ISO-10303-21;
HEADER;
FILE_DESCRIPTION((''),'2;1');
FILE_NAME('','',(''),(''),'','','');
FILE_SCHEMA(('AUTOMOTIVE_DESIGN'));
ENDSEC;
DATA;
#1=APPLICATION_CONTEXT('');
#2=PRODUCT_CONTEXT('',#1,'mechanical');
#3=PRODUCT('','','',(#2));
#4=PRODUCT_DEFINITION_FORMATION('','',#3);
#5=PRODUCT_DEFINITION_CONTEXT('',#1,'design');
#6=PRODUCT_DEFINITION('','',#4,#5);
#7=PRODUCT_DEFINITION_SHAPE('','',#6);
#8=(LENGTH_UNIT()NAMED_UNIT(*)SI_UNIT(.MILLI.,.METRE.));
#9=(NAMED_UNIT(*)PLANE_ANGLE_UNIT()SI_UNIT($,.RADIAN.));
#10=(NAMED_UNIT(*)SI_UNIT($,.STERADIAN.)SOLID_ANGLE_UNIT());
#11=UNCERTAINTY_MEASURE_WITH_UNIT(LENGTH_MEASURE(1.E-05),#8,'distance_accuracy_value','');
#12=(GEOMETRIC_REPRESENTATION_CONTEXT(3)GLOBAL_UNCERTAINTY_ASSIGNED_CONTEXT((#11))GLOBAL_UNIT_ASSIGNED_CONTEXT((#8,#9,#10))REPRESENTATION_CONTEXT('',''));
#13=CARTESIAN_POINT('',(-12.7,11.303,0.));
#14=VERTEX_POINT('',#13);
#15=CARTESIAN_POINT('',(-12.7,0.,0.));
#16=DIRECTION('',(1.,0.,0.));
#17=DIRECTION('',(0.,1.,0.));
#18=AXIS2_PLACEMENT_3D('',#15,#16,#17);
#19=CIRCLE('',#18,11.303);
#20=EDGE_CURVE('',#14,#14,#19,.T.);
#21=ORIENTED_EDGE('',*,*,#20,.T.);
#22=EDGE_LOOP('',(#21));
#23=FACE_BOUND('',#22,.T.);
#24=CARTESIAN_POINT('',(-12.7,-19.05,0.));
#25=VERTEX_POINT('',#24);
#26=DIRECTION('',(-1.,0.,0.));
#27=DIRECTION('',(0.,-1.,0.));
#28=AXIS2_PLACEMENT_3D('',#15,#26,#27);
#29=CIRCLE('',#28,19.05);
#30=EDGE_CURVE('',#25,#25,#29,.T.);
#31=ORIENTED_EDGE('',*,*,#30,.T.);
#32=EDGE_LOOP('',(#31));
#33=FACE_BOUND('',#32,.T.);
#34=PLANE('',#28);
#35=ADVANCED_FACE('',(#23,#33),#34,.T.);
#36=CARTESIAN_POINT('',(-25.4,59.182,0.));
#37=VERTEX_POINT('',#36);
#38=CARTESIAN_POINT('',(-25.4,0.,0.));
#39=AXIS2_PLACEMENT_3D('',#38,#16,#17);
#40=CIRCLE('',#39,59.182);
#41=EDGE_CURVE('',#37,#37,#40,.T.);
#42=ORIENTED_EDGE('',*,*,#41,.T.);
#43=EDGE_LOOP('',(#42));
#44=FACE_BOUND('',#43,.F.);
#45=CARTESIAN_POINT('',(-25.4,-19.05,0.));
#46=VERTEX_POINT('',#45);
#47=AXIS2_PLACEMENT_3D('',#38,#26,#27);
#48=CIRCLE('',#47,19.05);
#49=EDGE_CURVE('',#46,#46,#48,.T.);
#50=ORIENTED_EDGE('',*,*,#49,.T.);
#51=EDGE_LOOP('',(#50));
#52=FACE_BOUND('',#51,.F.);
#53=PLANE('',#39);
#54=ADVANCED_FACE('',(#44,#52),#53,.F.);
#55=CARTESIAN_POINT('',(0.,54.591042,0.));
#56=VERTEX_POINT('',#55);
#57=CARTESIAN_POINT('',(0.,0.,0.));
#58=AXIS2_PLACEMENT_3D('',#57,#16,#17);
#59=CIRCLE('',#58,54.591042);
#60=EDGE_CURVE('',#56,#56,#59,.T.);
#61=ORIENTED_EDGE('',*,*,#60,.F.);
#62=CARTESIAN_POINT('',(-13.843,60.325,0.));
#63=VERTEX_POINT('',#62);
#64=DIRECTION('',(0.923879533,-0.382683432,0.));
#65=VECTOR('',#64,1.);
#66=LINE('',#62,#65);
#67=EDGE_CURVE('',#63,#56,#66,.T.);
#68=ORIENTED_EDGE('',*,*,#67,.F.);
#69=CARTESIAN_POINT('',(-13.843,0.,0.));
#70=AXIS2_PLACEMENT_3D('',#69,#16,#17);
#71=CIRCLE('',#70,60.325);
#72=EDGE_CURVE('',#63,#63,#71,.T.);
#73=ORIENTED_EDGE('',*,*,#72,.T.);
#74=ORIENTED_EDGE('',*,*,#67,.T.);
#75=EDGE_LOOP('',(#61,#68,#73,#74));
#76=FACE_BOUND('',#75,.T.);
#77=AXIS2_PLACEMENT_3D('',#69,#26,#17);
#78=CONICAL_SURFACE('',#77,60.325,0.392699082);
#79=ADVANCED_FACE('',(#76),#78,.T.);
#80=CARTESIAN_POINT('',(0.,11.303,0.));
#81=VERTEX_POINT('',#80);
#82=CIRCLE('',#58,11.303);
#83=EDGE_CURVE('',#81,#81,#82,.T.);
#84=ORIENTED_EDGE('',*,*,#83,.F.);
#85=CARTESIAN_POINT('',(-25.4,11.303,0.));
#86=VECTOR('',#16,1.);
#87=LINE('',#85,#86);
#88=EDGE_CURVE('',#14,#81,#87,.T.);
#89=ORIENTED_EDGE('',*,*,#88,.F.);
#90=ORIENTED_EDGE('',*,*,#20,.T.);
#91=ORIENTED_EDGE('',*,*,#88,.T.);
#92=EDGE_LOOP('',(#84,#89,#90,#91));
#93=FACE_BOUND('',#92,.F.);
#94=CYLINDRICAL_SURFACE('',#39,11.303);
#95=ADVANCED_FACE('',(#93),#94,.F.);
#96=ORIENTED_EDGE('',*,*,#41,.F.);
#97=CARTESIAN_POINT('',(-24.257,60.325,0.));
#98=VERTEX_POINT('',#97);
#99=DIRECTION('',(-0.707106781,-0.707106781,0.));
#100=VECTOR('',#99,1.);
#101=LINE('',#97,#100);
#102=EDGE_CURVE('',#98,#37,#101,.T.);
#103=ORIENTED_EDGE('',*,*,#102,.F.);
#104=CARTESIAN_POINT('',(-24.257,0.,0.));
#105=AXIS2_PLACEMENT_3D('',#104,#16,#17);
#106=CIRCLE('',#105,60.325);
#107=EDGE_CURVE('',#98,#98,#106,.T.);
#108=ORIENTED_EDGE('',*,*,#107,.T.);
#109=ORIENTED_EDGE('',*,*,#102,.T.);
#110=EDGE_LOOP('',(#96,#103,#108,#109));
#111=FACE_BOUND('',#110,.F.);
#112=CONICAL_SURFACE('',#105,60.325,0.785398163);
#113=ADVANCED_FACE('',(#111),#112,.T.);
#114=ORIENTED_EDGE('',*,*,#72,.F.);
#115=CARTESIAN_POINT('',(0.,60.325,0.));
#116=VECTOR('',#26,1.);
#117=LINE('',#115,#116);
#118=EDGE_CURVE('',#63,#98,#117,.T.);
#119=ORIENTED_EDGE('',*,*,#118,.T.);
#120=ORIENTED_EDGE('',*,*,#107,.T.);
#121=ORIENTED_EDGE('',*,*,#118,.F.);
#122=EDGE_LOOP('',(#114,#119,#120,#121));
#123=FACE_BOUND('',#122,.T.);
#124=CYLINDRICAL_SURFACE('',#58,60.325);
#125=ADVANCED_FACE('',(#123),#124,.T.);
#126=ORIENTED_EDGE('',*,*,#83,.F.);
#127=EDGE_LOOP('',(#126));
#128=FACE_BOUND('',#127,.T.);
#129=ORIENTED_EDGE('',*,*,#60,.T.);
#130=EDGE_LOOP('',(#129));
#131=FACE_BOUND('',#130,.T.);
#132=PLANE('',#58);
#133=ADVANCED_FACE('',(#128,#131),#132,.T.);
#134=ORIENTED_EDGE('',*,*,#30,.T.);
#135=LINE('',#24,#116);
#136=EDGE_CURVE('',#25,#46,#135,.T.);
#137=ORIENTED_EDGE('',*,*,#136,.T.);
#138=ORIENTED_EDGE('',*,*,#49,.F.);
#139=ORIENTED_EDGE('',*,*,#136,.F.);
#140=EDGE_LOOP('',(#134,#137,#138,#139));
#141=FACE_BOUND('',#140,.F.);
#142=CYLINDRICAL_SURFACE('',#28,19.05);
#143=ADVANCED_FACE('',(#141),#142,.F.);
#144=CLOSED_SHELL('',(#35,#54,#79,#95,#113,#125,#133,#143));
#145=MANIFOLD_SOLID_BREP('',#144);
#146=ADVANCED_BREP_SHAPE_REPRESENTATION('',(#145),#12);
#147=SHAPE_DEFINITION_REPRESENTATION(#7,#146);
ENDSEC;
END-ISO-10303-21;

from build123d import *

# Parameters (mm, degrees)
F0_R           = 60.325
F1_DEPTH       = 25.4
F2_SIZE        = 1.143
F4_D           = 22.606
F4_CBORE_D     = 38.1
F4_CBORE_DEPTH = 12.7


# Not quite as in the source:
# - a fillet or chamfer that OpenCascade refuses, or shapes differently, is made with other operations: its cross-section is extruded or revolved along the edge and cut away or added


with BuildPart() as f1:
    # F0 (on Right) → F1 (new body)
    with BuildSketch(Plane.YZ):
        Circle(F0_R)
    extrude(amount=-F1_DEPTH)

    # F2
    f2_edges = [f1.edges().sort_by_distance(p)[0] for p in [
        (-25.4, -60.325, 0),
        (-12.7, 60.325, 0),
        (0, -60.325, 0),
    ]]
    chamfer(f2_edges, length=F2_SIZE)

    # F4 (through all)
    with Locations(Plane(origin=(-25.4, 0, 0), x_dir=(0, -1, 0), z_dir=(-1, 0, 0))):
        with Locations((0, 0)):
            CounterBoreHole(F4_D / 2, F4_CBORE_D / 2, F4_CBORE_DEPTH)

    # F5: chamfer of 12.7 on 1 edges, made by hand

    # F5_s1 → F5_t2 (revolve, cut)
    with BuildSketch(Plane.XY):
        Polygon((-13.843, 60.325), (7.8372561211, 51.3447438789), (-1.143, 60.325), align=None)
    revolve(axis=Axis((-1.143, 0, 0), (1, 0, 0)), mode=Mode.SUBTRACT)


solid = f1.part
